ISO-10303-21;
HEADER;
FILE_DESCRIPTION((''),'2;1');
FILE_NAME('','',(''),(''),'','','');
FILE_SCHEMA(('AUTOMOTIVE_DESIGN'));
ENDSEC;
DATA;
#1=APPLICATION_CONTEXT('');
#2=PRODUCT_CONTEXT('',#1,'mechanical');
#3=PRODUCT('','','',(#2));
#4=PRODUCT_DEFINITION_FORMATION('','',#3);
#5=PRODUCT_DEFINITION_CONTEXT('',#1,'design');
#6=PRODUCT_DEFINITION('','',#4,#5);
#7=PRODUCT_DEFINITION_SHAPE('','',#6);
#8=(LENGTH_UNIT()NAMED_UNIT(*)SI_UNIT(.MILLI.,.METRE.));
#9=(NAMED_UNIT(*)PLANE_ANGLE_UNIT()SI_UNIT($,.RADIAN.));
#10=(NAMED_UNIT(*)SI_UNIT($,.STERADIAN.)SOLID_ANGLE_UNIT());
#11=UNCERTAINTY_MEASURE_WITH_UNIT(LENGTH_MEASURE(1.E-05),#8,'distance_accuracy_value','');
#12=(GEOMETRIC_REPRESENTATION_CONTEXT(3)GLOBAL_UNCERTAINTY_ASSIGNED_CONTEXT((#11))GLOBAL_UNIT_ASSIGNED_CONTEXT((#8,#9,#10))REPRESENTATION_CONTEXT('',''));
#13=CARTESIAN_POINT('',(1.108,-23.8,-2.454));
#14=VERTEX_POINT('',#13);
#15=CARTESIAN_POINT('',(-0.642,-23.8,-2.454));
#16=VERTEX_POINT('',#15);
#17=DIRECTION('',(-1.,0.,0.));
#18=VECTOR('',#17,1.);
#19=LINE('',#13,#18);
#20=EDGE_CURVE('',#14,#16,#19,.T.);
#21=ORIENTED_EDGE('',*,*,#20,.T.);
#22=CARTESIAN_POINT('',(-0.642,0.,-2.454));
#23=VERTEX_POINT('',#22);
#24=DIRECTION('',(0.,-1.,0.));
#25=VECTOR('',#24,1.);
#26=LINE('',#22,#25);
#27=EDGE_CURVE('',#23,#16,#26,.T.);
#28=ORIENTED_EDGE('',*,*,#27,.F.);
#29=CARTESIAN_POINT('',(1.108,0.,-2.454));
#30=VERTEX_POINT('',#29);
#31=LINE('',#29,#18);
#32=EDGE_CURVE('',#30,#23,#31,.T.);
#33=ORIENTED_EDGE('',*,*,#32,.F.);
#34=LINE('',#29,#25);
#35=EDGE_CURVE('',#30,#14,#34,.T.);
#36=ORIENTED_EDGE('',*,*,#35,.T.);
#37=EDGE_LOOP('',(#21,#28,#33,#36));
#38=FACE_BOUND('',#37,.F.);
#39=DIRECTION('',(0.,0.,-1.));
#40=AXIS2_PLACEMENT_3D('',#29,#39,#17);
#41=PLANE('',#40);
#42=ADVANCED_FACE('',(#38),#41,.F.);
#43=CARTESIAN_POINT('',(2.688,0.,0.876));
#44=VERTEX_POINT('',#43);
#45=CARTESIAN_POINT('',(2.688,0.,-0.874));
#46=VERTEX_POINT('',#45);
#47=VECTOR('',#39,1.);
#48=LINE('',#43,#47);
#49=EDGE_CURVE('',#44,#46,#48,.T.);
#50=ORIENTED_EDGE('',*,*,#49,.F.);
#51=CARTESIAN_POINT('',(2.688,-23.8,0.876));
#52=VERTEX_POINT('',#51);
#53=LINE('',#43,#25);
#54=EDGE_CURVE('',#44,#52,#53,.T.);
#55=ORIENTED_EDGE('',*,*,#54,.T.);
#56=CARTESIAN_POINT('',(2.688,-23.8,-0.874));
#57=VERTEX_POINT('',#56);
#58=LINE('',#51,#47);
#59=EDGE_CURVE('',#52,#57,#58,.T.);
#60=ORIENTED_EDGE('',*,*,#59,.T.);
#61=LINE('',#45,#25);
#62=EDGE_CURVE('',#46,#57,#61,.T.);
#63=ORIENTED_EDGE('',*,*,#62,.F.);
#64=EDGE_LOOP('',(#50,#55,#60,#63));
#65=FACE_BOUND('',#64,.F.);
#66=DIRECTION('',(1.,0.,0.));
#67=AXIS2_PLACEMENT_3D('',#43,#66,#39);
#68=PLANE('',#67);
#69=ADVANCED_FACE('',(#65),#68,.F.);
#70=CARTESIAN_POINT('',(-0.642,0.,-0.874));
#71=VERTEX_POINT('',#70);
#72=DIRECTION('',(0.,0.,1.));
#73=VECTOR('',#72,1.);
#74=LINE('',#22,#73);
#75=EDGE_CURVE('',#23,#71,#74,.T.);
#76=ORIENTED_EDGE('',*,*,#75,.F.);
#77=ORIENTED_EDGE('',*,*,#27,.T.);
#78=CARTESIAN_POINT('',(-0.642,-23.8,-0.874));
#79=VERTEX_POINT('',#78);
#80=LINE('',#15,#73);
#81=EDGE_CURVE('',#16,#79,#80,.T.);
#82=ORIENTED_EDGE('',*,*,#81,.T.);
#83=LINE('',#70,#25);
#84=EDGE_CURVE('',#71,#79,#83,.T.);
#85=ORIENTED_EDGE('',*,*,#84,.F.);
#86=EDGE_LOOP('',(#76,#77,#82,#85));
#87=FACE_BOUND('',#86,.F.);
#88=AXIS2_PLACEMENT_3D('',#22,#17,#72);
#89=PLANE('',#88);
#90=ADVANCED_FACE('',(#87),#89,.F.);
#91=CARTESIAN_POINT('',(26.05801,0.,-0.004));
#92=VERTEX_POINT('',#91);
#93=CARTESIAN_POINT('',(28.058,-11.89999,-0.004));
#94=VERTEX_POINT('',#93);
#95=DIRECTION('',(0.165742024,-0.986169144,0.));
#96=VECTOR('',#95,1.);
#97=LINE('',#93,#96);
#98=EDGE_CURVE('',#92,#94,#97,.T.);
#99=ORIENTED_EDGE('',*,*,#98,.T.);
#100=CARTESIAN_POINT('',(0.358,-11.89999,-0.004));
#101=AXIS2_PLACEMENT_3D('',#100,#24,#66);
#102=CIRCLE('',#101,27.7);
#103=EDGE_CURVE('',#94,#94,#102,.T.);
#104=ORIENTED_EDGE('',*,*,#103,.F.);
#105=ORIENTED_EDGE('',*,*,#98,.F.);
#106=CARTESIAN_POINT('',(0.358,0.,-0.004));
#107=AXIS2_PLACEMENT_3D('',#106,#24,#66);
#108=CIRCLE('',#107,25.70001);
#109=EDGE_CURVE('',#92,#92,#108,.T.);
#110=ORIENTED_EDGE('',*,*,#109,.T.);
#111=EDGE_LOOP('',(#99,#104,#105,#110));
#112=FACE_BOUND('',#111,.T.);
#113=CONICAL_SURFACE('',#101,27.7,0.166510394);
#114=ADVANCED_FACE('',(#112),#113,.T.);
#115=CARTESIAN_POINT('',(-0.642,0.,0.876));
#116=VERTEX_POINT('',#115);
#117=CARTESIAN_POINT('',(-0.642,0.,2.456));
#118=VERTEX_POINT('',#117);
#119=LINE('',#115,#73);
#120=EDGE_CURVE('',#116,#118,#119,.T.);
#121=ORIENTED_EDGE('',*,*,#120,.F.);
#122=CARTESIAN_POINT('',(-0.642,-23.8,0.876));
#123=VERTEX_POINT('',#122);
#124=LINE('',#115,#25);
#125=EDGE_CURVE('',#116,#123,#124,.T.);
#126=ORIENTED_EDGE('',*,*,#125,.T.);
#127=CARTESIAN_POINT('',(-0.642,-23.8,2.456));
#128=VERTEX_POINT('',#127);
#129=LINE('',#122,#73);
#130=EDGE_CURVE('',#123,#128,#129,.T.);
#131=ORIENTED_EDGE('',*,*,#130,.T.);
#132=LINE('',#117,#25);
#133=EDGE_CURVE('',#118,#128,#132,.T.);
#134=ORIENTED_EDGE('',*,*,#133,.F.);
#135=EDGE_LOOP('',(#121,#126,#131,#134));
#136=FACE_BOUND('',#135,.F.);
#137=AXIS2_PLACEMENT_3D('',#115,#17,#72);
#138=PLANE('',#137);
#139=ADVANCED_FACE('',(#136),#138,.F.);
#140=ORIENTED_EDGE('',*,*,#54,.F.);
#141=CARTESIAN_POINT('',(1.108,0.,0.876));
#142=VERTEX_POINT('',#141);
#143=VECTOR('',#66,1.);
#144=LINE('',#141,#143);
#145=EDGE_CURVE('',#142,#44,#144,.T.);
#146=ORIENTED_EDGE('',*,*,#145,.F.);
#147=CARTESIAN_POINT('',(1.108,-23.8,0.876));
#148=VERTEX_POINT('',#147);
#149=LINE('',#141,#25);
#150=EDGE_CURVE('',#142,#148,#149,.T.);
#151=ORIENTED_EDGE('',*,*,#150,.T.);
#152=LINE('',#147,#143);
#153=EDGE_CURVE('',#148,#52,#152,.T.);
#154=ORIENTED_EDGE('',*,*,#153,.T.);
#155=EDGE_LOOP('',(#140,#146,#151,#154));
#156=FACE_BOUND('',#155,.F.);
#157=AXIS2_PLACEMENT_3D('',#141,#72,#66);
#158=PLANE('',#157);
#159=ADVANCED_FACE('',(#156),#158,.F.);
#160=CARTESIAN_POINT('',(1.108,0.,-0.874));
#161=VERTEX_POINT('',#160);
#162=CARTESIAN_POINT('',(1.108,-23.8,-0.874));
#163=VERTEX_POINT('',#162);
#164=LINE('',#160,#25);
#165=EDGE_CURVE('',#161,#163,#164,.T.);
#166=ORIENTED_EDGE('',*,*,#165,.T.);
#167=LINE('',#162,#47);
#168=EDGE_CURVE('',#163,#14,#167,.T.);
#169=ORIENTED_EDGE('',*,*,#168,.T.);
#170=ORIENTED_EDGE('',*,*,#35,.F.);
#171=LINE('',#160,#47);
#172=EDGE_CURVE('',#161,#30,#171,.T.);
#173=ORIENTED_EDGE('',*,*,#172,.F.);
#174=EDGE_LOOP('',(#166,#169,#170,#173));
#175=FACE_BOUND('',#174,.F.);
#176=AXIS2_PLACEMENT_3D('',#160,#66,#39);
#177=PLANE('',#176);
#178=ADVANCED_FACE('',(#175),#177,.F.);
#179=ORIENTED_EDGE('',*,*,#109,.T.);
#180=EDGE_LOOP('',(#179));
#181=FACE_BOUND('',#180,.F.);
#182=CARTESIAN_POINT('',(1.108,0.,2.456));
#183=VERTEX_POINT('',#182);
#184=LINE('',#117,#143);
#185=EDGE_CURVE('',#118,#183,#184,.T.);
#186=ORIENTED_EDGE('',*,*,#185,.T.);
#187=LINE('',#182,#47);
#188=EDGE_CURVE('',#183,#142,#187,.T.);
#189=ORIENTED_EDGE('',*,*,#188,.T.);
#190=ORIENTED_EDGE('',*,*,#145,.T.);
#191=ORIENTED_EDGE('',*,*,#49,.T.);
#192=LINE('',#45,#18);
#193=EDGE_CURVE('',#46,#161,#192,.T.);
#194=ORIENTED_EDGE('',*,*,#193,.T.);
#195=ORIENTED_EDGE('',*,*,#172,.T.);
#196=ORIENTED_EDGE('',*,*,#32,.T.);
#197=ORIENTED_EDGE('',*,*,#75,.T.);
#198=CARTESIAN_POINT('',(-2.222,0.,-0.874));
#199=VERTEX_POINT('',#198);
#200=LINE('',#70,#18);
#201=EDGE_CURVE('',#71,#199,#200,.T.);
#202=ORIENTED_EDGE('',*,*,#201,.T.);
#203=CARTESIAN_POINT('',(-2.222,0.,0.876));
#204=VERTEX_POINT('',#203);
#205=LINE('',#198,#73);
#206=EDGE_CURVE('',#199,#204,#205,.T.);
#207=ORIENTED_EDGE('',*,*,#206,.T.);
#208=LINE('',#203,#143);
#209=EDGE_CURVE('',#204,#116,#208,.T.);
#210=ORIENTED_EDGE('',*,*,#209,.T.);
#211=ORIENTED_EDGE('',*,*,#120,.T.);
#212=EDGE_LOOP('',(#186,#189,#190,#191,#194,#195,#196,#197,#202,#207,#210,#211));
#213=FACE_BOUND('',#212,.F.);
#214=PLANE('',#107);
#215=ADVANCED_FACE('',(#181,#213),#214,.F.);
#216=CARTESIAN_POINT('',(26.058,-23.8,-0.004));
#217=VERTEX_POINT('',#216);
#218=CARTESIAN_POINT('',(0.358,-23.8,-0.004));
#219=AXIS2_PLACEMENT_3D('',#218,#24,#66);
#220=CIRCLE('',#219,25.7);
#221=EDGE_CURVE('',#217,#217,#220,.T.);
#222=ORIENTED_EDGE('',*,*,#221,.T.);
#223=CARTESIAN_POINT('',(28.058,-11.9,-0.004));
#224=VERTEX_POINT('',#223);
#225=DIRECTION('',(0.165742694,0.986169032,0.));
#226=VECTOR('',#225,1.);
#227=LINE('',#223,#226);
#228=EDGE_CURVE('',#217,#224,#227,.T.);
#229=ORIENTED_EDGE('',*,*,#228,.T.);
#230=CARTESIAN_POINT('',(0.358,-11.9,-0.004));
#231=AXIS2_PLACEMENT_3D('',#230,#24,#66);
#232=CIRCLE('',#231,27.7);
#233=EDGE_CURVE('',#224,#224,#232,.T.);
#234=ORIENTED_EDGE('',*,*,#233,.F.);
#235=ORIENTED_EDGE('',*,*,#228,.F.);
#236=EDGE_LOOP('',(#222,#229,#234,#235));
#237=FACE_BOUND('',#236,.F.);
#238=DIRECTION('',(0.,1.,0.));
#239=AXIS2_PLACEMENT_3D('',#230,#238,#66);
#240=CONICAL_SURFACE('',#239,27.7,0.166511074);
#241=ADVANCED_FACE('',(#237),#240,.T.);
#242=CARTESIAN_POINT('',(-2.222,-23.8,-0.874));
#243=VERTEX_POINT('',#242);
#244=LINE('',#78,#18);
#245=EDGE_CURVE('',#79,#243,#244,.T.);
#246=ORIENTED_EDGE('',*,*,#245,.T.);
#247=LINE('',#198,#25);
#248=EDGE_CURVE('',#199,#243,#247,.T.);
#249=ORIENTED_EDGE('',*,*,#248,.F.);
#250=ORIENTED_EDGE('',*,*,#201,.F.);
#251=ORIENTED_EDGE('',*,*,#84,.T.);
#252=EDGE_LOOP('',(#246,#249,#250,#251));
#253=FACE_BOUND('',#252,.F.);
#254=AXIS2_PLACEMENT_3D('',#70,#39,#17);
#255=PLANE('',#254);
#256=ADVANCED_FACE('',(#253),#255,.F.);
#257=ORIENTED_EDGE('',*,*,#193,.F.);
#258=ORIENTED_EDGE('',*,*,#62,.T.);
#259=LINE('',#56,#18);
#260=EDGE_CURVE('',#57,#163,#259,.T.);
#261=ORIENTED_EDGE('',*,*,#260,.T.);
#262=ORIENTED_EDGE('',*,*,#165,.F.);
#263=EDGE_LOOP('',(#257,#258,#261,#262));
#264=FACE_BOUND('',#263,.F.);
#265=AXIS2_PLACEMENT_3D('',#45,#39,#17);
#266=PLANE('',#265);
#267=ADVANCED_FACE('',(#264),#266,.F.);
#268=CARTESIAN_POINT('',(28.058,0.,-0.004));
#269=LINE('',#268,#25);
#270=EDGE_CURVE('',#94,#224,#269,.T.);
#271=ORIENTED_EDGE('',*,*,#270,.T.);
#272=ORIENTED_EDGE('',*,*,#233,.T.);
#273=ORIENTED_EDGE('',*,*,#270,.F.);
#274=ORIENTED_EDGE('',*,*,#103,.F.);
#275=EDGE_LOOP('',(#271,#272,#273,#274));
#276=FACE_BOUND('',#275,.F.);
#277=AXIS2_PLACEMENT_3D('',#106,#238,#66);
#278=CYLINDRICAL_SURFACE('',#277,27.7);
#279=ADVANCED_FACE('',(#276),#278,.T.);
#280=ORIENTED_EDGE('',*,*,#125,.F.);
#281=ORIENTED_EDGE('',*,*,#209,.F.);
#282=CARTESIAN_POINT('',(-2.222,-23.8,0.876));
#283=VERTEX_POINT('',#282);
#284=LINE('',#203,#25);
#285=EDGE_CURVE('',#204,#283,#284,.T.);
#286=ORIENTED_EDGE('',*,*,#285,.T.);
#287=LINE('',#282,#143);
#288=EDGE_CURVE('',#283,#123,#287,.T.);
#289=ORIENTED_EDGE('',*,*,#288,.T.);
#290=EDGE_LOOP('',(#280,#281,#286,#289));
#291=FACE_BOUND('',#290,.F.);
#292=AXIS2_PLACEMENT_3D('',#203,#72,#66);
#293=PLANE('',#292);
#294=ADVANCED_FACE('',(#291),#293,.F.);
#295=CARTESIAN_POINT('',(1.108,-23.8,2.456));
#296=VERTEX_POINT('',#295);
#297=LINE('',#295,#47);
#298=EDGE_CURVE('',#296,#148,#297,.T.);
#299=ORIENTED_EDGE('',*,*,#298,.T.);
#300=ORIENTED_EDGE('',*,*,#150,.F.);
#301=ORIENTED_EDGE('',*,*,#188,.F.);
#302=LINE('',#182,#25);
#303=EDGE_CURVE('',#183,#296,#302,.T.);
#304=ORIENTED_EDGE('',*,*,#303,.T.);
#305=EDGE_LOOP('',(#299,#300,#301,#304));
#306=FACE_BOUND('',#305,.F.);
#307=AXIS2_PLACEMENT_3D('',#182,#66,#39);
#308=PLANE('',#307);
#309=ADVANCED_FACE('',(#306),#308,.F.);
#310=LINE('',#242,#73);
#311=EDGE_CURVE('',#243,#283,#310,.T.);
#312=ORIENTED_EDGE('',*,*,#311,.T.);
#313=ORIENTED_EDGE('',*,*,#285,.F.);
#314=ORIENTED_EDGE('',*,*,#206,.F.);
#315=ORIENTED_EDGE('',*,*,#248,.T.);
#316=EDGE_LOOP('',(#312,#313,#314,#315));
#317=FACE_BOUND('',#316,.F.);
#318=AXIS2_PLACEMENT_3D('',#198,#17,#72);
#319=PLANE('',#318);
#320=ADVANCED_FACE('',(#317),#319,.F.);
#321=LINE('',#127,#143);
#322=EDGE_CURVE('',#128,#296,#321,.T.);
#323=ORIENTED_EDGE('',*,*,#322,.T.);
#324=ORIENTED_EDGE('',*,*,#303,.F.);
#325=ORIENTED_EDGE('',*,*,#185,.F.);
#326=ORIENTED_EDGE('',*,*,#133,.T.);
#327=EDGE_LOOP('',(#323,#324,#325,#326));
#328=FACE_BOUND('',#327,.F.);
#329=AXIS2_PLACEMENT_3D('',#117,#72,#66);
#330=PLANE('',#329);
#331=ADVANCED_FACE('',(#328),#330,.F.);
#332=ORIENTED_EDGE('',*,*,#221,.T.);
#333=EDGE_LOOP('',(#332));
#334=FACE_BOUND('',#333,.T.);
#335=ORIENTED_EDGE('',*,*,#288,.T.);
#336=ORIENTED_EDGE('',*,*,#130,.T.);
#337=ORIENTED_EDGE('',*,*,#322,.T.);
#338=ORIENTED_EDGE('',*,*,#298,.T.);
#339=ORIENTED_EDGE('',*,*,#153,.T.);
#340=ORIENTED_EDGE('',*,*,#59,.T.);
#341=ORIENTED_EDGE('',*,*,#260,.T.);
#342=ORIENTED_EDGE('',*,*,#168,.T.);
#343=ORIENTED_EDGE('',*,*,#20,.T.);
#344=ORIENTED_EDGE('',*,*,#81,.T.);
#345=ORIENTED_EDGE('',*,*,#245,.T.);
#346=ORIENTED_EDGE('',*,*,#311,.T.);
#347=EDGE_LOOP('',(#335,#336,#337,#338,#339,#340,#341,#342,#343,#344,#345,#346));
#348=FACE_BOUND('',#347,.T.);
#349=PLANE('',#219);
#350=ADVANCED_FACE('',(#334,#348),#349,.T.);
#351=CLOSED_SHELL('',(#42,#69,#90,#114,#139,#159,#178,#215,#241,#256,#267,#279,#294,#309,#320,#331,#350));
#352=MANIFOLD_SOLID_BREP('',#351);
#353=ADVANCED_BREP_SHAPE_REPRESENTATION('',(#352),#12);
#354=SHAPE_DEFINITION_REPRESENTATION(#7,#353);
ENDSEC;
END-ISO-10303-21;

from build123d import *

# Parameters (mm, degrees)
F0_R       = 27.7
F1_DEPTH   = 23.8
F2_SIZE2   = 11.9
F2_SIZE    = 2
F2_2_SIZE2 = 11.89999
F2_2_SIZE  = 1.99999


# Not quite as in the source:
# - a fillet or chamfer is up to 0.001 mm smaller than in the source, because OpenCascade refuses the exact size


with BuildPart() as f1:
    # F0 (on Front) → F1 (new body)
    with BuildSketch(Plane.XZ):
        with Locations((0.358, -0.004)):
            Circle(F0_R)
        Polygon((-2.222, -0.874), (-2.222, -0.004), (-2.222, 0.876), (-0.642, 0.876), (-0.642, 2.456), (1.108, 2.456), (1.108, 0.876), (2.688, 0.876), (2.688, -0.874), (1.108, -0.874), (1.108, -2.454), (-0.642, -2.454), (-0.642, -0.874), align=None, mode=Mode.SUBTRACT)
    extrude(amount=F1_DEPTH)

    # F2
    f2_edges = [f1.edges().sort_by_distance(p)[0] for p in [
        (-27.342, -23.8, -0.004),
    ]]
    f2_side = f1.faces().sort_by_distance((-26.558526, -23.8, -0.004))[0]
    chamfer(f2_edges, length=F2_SIZE, length2=F2_SIZE2, reference=f2_side)

    # F2#2 (size 2 and 11.9 in the source; OpenCascade refuses exactly that, so slightly less here)
    f2_2_edges = [f1.edges().sort_by_distance(p)[0] for p in [
        (-27.342, 0, -0.004),
    ]]
    f2_2_side = f1.faces().sort_by_distance((-26.558526, 0, -0.004))[0]
    chamfer(f2_2_edges, length=F2_2_SIZE, length2=F2_2_SIZE2, reference=f2_2_side)


solid = f1.part
